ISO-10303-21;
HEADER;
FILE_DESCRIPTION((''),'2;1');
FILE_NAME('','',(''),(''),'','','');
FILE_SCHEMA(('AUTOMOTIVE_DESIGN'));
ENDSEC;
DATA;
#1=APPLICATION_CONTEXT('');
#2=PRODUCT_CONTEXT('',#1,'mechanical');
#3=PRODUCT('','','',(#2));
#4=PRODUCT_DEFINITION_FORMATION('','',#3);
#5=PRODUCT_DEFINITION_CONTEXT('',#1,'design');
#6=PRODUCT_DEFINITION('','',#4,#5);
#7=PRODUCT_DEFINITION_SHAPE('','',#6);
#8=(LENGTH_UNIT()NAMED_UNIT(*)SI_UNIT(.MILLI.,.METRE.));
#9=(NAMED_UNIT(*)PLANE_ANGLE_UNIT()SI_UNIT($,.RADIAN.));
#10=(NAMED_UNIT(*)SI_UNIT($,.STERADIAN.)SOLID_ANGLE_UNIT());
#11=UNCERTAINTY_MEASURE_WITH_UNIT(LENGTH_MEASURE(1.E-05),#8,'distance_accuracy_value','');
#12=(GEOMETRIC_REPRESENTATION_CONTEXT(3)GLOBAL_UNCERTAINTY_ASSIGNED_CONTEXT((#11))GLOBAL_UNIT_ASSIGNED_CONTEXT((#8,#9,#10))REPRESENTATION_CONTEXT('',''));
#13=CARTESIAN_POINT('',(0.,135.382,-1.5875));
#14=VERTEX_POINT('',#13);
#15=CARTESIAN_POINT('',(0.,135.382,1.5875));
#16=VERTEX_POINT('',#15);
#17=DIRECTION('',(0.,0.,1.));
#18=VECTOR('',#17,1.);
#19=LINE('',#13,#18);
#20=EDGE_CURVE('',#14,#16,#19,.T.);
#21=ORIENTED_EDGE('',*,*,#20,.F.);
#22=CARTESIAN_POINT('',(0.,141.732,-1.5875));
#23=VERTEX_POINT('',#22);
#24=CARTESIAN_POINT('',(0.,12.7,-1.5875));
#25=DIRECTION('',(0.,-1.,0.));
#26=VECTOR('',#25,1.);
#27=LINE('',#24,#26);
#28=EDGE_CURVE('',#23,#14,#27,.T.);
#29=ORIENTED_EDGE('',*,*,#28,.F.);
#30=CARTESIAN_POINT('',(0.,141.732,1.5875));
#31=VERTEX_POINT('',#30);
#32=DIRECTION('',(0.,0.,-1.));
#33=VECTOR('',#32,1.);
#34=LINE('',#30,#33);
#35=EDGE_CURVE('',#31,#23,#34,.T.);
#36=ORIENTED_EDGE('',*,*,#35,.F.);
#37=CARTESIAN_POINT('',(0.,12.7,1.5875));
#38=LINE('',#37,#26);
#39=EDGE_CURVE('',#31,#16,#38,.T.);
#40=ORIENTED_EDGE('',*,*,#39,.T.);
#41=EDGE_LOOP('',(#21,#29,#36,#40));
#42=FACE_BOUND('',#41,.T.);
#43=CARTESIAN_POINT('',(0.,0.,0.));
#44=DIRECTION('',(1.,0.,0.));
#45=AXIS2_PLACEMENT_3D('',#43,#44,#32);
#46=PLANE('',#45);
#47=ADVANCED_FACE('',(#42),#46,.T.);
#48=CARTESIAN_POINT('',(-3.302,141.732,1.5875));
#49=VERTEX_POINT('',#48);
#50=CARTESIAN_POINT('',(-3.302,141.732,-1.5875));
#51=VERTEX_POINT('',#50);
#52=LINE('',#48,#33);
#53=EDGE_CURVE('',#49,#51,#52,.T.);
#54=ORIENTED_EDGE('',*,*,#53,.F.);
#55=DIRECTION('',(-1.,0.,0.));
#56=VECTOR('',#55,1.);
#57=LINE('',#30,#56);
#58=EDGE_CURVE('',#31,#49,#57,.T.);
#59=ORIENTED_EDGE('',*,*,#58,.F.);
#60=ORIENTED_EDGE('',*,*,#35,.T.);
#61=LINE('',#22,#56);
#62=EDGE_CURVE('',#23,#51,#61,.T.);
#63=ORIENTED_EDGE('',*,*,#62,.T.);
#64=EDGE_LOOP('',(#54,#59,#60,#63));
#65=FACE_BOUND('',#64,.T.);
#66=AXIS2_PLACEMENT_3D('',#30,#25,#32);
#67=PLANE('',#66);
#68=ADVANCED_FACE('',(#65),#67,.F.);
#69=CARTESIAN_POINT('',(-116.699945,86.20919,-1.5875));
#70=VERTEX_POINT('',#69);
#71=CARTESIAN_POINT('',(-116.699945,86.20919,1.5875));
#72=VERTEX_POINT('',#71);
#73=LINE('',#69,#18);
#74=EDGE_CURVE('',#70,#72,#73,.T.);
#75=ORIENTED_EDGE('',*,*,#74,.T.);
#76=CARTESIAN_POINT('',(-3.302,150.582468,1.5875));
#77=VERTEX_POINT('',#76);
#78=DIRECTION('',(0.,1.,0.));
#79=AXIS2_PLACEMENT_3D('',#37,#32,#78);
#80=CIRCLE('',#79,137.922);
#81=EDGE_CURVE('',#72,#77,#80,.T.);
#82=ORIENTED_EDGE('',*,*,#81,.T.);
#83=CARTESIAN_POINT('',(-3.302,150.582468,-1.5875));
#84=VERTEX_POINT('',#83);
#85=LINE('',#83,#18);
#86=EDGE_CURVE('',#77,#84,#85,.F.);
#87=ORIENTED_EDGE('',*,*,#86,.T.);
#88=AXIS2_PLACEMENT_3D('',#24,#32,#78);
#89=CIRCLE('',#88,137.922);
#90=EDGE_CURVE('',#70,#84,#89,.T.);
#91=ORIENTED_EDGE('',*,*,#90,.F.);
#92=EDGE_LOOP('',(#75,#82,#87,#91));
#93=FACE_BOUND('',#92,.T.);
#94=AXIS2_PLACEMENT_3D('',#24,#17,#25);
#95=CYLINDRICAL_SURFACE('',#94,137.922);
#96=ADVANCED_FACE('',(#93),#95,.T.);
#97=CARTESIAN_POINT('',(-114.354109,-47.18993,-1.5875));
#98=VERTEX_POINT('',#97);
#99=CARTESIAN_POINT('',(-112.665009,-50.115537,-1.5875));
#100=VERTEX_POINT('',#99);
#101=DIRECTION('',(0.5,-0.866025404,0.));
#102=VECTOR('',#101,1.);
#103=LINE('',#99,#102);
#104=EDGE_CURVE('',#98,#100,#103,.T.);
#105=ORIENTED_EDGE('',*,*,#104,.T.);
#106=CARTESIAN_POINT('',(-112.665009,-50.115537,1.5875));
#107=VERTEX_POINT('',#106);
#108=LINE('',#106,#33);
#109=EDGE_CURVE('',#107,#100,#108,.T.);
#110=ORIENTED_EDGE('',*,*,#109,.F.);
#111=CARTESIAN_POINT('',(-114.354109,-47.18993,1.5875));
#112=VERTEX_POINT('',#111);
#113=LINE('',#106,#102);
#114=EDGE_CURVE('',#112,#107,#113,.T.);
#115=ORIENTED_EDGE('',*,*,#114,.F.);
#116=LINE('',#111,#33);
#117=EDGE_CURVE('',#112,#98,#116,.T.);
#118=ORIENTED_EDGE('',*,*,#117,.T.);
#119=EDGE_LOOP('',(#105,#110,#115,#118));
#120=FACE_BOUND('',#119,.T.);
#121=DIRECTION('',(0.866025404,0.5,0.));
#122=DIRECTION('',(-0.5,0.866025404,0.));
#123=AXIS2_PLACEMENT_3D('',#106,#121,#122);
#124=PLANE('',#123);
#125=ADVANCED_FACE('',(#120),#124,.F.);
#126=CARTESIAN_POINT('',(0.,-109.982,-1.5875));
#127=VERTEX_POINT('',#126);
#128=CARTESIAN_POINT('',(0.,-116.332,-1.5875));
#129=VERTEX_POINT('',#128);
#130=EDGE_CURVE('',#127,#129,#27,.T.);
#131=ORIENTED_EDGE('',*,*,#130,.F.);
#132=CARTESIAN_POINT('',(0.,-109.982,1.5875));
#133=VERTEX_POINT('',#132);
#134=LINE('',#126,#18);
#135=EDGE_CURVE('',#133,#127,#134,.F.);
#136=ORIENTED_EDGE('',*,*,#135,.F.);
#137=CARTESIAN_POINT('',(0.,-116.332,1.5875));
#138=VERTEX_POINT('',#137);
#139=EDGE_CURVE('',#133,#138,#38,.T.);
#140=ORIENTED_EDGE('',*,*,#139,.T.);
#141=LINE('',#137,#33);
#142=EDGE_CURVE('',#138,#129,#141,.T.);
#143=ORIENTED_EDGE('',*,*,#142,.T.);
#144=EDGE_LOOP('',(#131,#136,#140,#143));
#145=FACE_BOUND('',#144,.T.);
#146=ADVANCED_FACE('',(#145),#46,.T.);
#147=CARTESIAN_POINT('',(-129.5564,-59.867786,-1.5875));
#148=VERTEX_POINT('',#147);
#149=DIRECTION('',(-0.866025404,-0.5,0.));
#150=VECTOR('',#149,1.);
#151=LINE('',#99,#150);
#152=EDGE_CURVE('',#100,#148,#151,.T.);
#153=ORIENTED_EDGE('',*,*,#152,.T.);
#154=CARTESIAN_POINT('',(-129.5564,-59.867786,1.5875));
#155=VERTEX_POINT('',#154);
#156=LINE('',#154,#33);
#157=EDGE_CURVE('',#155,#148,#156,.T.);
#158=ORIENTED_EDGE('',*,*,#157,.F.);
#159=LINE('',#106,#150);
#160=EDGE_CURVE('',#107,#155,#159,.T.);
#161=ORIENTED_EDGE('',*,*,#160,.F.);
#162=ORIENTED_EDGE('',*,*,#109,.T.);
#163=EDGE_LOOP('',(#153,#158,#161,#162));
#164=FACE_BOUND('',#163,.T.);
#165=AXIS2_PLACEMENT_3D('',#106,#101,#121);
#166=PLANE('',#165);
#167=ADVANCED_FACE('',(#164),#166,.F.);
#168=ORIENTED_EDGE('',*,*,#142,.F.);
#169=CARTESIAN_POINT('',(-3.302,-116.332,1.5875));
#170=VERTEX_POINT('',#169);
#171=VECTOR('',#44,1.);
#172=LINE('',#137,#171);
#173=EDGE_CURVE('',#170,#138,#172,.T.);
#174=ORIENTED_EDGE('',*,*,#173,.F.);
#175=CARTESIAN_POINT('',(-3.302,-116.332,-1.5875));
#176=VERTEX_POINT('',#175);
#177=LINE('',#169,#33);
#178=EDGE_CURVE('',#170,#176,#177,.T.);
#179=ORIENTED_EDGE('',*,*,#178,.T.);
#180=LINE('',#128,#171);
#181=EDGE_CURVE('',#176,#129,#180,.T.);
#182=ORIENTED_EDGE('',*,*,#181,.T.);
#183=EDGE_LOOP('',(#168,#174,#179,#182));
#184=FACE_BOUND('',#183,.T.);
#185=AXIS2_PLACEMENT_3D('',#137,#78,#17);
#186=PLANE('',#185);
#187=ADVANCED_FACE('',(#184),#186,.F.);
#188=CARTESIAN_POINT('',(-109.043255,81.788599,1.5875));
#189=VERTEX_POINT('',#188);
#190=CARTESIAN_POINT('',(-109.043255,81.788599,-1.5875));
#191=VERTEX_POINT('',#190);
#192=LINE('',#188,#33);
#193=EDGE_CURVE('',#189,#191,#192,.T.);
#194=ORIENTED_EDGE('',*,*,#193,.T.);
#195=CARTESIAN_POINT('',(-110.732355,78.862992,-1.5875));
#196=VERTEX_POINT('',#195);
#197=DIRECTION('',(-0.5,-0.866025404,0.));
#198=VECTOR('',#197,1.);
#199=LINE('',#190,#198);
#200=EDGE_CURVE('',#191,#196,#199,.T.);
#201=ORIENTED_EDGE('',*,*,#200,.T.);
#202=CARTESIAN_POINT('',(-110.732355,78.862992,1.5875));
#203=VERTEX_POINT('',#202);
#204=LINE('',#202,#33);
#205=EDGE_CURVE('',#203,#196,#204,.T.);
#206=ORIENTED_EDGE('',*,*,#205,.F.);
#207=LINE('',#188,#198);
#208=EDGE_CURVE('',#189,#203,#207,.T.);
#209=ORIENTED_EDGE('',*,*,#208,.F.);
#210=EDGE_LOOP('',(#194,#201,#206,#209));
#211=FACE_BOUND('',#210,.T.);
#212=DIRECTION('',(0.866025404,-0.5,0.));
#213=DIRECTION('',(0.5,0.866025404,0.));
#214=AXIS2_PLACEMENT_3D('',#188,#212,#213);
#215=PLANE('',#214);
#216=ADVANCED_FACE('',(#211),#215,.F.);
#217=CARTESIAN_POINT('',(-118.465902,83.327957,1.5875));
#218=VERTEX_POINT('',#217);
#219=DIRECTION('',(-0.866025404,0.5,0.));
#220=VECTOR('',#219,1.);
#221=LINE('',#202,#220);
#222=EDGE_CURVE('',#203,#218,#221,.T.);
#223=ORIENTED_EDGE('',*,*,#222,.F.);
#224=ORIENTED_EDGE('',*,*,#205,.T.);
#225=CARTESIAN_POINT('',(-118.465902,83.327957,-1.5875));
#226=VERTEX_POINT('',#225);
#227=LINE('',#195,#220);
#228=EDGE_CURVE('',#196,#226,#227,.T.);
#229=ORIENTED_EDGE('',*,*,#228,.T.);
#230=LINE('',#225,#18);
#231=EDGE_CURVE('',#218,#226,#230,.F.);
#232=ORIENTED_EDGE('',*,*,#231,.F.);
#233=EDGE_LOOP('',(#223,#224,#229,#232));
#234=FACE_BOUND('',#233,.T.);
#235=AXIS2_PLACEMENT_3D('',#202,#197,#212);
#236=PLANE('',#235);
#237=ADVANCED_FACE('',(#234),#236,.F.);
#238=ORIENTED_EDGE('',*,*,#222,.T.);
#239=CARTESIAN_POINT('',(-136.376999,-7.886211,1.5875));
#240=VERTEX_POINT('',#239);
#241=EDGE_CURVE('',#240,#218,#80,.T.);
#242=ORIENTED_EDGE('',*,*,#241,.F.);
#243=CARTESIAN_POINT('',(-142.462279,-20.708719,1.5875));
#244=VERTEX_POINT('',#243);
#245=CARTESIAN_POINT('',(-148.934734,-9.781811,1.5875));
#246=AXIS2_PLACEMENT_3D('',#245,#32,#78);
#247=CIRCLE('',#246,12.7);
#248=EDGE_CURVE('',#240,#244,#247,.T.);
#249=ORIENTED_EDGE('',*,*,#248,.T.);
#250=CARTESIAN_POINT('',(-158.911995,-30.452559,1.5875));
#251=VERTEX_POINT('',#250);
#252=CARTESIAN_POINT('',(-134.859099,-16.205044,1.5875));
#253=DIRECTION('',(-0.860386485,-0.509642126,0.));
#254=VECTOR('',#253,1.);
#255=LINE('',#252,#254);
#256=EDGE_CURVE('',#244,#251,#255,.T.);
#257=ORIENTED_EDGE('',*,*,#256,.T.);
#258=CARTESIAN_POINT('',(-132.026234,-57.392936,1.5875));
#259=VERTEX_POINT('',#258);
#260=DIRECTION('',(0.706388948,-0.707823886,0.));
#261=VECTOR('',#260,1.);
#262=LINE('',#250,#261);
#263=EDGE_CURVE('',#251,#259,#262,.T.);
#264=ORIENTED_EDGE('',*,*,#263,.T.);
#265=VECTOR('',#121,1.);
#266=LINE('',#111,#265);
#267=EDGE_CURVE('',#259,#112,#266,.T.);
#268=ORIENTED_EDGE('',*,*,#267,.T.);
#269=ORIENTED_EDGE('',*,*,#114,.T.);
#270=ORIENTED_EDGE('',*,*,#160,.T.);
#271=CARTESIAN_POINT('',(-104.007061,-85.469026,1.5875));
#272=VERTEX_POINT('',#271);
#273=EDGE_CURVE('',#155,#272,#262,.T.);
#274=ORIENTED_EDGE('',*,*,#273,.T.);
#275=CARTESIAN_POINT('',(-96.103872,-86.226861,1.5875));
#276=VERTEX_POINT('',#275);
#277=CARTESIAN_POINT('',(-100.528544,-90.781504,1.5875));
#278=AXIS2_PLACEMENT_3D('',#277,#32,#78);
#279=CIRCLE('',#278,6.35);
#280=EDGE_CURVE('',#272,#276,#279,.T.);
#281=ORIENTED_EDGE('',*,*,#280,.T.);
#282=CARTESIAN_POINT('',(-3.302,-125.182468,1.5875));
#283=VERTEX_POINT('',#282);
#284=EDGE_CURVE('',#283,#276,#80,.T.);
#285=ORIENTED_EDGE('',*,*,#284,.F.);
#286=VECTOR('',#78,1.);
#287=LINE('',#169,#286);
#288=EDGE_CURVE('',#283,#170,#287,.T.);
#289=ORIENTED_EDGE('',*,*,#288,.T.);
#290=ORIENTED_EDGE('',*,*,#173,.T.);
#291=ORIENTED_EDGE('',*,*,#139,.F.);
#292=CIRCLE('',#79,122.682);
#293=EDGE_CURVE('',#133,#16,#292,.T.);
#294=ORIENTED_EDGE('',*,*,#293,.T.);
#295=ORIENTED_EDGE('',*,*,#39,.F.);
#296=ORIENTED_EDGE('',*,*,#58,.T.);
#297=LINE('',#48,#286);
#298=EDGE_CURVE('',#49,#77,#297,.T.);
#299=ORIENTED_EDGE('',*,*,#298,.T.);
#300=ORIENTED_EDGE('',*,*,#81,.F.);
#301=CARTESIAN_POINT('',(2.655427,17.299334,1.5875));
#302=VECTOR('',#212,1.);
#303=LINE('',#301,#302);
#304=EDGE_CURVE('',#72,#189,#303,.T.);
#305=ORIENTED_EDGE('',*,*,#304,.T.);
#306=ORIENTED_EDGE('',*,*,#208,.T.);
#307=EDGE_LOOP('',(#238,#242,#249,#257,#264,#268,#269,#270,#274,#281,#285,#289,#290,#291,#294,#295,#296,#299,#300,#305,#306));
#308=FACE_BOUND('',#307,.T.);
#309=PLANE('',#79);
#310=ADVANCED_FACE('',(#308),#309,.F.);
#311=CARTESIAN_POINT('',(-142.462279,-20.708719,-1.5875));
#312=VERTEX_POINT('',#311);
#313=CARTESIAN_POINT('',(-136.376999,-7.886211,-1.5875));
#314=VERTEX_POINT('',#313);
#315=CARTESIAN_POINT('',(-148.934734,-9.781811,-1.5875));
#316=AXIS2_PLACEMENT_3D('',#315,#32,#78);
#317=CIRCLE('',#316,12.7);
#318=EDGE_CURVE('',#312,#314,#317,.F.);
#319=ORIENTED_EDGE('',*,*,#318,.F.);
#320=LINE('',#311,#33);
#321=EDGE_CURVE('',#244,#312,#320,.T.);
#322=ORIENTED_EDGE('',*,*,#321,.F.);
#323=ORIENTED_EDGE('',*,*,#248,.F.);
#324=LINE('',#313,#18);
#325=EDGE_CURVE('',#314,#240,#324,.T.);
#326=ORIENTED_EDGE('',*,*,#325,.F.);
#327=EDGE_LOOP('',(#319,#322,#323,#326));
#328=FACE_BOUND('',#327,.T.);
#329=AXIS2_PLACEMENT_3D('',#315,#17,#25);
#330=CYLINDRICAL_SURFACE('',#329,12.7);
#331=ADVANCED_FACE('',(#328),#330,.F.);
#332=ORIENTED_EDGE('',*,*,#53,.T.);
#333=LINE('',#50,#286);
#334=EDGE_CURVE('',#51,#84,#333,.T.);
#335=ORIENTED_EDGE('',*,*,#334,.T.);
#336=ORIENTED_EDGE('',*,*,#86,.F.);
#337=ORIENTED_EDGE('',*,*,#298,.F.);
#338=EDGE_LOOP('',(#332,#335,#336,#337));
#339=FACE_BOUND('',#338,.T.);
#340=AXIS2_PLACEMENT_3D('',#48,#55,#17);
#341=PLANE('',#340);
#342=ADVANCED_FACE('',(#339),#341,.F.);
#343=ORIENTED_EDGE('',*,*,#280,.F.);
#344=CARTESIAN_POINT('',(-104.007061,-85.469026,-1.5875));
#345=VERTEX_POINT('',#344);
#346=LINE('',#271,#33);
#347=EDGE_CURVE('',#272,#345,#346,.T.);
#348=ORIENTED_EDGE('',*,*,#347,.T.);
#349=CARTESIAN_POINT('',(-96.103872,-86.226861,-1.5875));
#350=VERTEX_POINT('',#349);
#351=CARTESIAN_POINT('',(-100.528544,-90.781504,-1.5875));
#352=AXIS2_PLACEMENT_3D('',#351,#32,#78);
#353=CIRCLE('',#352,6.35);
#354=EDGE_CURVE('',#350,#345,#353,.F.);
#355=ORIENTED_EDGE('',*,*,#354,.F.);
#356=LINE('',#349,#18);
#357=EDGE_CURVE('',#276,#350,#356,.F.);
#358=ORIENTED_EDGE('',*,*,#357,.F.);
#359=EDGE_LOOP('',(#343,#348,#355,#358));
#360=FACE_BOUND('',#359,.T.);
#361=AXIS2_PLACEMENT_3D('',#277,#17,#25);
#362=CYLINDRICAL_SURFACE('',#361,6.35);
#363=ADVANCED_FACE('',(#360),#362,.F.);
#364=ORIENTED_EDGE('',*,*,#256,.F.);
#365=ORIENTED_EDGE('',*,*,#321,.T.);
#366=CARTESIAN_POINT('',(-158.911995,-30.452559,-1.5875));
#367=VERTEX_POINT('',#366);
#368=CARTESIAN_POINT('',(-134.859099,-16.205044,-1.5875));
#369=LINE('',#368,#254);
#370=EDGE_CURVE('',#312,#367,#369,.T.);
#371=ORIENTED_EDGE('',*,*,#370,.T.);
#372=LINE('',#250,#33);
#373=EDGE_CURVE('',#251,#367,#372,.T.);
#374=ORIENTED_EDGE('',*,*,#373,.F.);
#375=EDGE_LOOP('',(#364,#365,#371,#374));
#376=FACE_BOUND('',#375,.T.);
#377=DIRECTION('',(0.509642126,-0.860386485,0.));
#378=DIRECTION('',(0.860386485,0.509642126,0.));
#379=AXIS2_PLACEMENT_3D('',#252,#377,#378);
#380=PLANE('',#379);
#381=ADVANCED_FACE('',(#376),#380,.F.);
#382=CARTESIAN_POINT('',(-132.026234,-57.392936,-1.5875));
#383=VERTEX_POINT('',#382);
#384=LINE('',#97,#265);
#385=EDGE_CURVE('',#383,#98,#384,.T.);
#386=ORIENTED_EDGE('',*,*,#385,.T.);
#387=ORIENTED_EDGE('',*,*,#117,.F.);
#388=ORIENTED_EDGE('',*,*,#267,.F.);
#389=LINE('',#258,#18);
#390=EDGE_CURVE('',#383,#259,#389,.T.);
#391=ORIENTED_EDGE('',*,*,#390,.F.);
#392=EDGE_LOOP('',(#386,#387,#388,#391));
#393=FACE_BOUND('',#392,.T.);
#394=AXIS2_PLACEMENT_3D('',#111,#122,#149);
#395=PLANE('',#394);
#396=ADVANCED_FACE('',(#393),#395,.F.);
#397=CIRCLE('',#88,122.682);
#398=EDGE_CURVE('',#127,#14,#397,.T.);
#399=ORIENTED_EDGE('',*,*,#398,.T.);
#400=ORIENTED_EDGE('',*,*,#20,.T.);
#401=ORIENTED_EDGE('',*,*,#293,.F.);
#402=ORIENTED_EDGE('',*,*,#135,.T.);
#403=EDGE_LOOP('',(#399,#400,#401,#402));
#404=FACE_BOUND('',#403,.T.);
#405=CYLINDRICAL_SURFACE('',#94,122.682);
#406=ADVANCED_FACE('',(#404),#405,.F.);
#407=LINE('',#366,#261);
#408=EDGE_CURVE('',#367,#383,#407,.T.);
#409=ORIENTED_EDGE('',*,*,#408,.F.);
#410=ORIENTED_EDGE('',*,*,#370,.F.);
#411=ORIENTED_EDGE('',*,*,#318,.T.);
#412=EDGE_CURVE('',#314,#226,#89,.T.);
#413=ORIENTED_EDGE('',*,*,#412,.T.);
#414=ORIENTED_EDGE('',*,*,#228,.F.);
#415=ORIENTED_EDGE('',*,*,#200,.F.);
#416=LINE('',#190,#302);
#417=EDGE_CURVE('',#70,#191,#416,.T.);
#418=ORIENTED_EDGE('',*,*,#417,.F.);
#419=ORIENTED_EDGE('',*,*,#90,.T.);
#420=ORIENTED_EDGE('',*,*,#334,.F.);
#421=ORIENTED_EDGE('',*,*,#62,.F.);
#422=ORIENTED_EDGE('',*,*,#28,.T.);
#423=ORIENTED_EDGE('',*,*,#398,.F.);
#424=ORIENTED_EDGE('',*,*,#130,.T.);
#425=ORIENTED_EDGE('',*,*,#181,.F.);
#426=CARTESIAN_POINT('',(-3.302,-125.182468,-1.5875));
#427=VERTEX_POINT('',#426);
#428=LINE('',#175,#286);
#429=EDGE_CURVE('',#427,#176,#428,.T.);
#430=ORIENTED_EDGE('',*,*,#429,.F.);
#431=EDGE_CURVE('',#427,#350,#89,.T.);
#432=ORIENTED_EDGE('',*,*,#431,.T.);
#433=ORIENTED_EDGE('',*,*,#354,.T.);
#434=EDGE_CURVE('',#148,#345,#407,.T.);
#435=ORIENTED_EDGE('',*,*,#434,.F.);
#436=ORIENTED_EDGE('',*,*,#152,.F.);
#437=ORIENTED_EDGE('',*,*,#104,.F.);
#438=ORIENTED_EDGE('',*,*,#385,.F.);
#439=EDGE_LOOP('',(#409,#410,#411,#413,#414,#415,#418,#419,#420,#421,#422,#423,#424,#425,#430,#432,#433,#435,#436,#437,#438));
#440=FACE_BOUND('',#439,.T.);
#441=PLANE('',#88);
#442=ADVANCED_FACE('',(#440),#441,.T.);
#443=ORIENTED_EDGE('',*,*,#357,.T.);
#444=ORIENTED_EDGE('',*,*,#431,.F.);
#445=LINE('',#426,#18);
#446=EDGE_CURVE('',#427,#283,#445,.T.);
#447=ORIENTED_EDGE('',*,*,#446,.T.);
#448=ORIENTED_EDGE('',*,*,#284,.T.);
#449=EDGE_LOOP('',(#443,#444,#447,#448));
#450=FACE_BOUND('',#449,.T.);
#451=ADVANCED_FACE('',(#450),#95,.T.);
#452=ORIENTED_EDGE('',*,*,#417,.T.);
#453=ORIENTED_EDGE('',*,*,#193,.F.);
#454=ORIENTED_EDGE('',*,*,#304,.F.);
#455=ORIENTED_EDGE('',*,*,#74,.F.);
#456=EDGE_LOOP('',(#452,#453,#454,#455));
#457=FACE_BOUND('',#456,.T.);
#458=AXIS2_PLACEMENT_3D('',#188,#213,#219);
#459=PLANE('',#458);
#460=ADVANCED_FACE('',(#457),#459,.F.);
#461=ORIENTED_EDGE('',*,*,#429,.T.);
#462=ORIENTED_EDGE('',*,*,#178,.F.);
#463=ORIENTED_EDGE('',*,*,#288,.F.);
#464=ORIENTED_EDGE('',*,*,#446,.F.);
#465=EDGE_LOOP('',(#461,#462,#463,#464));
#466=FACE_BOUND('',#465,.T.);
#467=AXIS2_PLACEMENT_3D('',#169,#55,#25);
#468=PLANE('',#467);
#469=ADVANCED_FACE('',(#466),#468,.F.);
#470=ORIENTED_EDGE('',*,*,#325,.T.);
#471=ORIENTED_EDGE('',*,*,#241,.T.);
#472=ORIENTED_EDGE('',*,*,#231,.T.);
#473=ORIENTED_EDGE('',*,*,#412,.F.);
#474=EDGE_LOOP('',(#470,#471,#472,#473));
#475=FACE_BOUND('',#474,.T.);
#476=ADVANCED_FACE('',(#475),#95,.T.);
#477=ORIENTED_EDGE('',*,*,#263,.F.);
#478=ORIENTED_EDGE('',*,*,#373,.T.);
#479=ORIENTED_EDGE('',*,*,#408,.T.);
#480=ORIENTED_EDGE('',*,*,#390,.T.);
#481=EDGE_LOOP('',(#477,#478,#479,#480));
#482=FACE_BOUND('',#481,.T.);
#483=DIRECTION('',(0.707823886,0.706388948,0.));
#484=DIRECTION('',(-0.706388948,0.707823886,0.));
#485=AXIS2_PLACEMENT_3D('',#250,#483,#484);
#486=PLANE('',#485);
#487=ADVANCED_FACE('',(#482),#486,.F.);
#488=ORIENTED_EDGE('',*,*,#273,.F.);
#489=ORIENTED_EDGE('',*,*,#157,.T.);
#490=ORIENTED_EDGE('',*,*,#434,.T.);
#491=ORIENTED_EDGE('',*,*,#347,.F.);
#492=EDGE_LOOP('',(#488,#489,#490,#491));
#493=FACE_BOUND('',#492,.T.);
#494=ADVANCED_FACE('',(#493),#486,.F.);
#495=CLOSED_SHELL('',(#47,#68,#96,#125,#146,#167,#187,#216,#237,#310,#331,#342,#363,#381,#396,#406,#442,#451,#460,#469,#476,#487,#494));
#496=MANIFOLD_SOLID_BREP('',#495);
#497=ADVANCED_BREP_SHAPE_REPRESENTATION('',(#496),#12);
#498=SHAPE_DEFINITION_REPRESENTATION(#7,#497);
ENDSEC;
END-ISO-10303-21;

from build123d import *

# Parameters (mm, degrees)
SKETCH2_R           = 137.922
SKETCH2_R_2         = 122.682
BOSS_EXTRUDE2_DEPTH = 1.5875
SKETCH3_W           = 290.977734258
SKETCH3_H           = 504.828840158
CUT_EXTRUDE1_DEPTH  = 205.235122161
BOSS_EXTRUDE3_DEPTH = 1.5875
FILLET2_R           = 6.35
FILLET3_R           = 12.7
SKETCH5_W           = 3.302
SKETCH5_H           = 10.16
SKETCH5_H_2         = 10.320651629
CUT_EXTRUDE2_DEPTH  = 219.975089365


with BuildPart() as part:
    # Sketch2 → Boss-Extrude2 (new, symmetric)
    with BuildSketch(Plane(origin=(248.273568551, -245.01347209, 0), x_dir=(0, -1, 0), z_dir=(0, 0, -1))):
        with Locations(Location((-257.71347209, 248.273568551, 0), (0, 0, 180))):
            Circle(SKETCH2_R)
        with Locations(Location((-257.71347209, 248.273568551, 0), (0, 0, 180))):
            Circle(SKETCH2_R_2, mode=Mode.SUBTRACT)
    extrude(amount=BOSS_EXTRUDE2_DEPTH, both=True)

    # Sketch3 → Cut-Extrude1 (cut, through all)
    with BuildSketch(Plane(origin=(0, 0, 0), x_dir=(0, 0, -1), z_dir=(1, 0, 0))):
        with Locations((4.206907001, 10.947122083)):
            Rectangle(SKETCH3_W, SKETCH3_H)
    extrude(amount=CUT_EXTRUDE1_DEPTH, mode=Mode.SUBTRACT)

    # Sketch4 → Boss-Extrude3 (add, symmetric)
    with BuildSketch(Plane.XY):
        with BuildLine():
            Line((-158.91199531, -30.452559211), (-104.007060596, -85.469026207))
            ThreePointArc((-104.007060596, -85.469026207), (-101.940396796, -83.943553525), (-99.869204781, -82.424234664))
            ThreePointArc((-99.869204781, -82.424234664), (-121.945025923, -51.735150773), (-134.859098706, -16.205044198))
            Line((-134.859098706, -16.205044198), (-158.91199531, -30.452559211))
        make_face()
    extrude(amount=BOSS_EXTRUDE3_DEPTH, both=True)

    # Fillet2
    # the kernel refuses this fillet: 6.35 mm, written as the material it adds along each edge
    with BuildSketch(Plane(origin=(-99.869204781, -82.424234664, 1.5875), x_dir=(0.7036137196097393, -0.7105826718805821, 0), z_dir=(0, 0, -1))) as fillet2_piece_1:
        with BuildLine():
            CenterArc((5.474610705, 6.348804924), FILLET2_R, 191.50159108, 77.386791497)
            Line((-0.747876011, 5.082645744), (-0.872325745, 5.057322561))
            ThreePointArc((-0.872325745, 5.057322561), (-0.503364548, 2.522278655), (-0.12559154, -0.018861738))
            Line((-0.12559154, -0.018861738), (0.002463821, -0.126976098))
            ThreePointArc((0.002463821, -0.126976098), (2.675709823, -0.101042949), (5.348955824, -0.126976098))
            Line((5.348955824, -0.126976098), (5.351419645, 0))
        make_face()
    extrude(amount=3.175)

    # Fillet3
    fillet3_edges = [part.edges().sort_by_distance(p)[0] for p in [
        (-134.859098706, -16.205044198, 0),
    ]]
    fillet(fillet3_edges, radius=FILLET3_R)

    # Sketch5 → Cut-Extrude2 (cut, through all)
    with BuildSketch(Plane(origin=(0, 0, -1.5875), x_dir=(-1, 0, 0), z_dir=(0, 0, -1))):
        with Locations((1.651, 146.812)):
            Rectangle(SKETCH5_W, SKETCH5_H)
        Polygon((109.043255392, 81.788598611), (110.732355392, 78.862991592), (120.034009933, 84.233304346), (118.344909933, 87.158911365), align=None)
        with Locations((1.651, -121.492325815)):
            Rectangle(SKETCH5_W, SKETCH5_H_2)
        Polygon((112.665009205, -50.115536994), (114.354109205, -47.189929975), (136.351154461, -59.889929975), (134.662054461, -62.815536994), align=None)
    extrude(amount=-CUT_EXTRUDE2_DEPTH, mode=Mode.SUBTRACT)


solid = part.part
